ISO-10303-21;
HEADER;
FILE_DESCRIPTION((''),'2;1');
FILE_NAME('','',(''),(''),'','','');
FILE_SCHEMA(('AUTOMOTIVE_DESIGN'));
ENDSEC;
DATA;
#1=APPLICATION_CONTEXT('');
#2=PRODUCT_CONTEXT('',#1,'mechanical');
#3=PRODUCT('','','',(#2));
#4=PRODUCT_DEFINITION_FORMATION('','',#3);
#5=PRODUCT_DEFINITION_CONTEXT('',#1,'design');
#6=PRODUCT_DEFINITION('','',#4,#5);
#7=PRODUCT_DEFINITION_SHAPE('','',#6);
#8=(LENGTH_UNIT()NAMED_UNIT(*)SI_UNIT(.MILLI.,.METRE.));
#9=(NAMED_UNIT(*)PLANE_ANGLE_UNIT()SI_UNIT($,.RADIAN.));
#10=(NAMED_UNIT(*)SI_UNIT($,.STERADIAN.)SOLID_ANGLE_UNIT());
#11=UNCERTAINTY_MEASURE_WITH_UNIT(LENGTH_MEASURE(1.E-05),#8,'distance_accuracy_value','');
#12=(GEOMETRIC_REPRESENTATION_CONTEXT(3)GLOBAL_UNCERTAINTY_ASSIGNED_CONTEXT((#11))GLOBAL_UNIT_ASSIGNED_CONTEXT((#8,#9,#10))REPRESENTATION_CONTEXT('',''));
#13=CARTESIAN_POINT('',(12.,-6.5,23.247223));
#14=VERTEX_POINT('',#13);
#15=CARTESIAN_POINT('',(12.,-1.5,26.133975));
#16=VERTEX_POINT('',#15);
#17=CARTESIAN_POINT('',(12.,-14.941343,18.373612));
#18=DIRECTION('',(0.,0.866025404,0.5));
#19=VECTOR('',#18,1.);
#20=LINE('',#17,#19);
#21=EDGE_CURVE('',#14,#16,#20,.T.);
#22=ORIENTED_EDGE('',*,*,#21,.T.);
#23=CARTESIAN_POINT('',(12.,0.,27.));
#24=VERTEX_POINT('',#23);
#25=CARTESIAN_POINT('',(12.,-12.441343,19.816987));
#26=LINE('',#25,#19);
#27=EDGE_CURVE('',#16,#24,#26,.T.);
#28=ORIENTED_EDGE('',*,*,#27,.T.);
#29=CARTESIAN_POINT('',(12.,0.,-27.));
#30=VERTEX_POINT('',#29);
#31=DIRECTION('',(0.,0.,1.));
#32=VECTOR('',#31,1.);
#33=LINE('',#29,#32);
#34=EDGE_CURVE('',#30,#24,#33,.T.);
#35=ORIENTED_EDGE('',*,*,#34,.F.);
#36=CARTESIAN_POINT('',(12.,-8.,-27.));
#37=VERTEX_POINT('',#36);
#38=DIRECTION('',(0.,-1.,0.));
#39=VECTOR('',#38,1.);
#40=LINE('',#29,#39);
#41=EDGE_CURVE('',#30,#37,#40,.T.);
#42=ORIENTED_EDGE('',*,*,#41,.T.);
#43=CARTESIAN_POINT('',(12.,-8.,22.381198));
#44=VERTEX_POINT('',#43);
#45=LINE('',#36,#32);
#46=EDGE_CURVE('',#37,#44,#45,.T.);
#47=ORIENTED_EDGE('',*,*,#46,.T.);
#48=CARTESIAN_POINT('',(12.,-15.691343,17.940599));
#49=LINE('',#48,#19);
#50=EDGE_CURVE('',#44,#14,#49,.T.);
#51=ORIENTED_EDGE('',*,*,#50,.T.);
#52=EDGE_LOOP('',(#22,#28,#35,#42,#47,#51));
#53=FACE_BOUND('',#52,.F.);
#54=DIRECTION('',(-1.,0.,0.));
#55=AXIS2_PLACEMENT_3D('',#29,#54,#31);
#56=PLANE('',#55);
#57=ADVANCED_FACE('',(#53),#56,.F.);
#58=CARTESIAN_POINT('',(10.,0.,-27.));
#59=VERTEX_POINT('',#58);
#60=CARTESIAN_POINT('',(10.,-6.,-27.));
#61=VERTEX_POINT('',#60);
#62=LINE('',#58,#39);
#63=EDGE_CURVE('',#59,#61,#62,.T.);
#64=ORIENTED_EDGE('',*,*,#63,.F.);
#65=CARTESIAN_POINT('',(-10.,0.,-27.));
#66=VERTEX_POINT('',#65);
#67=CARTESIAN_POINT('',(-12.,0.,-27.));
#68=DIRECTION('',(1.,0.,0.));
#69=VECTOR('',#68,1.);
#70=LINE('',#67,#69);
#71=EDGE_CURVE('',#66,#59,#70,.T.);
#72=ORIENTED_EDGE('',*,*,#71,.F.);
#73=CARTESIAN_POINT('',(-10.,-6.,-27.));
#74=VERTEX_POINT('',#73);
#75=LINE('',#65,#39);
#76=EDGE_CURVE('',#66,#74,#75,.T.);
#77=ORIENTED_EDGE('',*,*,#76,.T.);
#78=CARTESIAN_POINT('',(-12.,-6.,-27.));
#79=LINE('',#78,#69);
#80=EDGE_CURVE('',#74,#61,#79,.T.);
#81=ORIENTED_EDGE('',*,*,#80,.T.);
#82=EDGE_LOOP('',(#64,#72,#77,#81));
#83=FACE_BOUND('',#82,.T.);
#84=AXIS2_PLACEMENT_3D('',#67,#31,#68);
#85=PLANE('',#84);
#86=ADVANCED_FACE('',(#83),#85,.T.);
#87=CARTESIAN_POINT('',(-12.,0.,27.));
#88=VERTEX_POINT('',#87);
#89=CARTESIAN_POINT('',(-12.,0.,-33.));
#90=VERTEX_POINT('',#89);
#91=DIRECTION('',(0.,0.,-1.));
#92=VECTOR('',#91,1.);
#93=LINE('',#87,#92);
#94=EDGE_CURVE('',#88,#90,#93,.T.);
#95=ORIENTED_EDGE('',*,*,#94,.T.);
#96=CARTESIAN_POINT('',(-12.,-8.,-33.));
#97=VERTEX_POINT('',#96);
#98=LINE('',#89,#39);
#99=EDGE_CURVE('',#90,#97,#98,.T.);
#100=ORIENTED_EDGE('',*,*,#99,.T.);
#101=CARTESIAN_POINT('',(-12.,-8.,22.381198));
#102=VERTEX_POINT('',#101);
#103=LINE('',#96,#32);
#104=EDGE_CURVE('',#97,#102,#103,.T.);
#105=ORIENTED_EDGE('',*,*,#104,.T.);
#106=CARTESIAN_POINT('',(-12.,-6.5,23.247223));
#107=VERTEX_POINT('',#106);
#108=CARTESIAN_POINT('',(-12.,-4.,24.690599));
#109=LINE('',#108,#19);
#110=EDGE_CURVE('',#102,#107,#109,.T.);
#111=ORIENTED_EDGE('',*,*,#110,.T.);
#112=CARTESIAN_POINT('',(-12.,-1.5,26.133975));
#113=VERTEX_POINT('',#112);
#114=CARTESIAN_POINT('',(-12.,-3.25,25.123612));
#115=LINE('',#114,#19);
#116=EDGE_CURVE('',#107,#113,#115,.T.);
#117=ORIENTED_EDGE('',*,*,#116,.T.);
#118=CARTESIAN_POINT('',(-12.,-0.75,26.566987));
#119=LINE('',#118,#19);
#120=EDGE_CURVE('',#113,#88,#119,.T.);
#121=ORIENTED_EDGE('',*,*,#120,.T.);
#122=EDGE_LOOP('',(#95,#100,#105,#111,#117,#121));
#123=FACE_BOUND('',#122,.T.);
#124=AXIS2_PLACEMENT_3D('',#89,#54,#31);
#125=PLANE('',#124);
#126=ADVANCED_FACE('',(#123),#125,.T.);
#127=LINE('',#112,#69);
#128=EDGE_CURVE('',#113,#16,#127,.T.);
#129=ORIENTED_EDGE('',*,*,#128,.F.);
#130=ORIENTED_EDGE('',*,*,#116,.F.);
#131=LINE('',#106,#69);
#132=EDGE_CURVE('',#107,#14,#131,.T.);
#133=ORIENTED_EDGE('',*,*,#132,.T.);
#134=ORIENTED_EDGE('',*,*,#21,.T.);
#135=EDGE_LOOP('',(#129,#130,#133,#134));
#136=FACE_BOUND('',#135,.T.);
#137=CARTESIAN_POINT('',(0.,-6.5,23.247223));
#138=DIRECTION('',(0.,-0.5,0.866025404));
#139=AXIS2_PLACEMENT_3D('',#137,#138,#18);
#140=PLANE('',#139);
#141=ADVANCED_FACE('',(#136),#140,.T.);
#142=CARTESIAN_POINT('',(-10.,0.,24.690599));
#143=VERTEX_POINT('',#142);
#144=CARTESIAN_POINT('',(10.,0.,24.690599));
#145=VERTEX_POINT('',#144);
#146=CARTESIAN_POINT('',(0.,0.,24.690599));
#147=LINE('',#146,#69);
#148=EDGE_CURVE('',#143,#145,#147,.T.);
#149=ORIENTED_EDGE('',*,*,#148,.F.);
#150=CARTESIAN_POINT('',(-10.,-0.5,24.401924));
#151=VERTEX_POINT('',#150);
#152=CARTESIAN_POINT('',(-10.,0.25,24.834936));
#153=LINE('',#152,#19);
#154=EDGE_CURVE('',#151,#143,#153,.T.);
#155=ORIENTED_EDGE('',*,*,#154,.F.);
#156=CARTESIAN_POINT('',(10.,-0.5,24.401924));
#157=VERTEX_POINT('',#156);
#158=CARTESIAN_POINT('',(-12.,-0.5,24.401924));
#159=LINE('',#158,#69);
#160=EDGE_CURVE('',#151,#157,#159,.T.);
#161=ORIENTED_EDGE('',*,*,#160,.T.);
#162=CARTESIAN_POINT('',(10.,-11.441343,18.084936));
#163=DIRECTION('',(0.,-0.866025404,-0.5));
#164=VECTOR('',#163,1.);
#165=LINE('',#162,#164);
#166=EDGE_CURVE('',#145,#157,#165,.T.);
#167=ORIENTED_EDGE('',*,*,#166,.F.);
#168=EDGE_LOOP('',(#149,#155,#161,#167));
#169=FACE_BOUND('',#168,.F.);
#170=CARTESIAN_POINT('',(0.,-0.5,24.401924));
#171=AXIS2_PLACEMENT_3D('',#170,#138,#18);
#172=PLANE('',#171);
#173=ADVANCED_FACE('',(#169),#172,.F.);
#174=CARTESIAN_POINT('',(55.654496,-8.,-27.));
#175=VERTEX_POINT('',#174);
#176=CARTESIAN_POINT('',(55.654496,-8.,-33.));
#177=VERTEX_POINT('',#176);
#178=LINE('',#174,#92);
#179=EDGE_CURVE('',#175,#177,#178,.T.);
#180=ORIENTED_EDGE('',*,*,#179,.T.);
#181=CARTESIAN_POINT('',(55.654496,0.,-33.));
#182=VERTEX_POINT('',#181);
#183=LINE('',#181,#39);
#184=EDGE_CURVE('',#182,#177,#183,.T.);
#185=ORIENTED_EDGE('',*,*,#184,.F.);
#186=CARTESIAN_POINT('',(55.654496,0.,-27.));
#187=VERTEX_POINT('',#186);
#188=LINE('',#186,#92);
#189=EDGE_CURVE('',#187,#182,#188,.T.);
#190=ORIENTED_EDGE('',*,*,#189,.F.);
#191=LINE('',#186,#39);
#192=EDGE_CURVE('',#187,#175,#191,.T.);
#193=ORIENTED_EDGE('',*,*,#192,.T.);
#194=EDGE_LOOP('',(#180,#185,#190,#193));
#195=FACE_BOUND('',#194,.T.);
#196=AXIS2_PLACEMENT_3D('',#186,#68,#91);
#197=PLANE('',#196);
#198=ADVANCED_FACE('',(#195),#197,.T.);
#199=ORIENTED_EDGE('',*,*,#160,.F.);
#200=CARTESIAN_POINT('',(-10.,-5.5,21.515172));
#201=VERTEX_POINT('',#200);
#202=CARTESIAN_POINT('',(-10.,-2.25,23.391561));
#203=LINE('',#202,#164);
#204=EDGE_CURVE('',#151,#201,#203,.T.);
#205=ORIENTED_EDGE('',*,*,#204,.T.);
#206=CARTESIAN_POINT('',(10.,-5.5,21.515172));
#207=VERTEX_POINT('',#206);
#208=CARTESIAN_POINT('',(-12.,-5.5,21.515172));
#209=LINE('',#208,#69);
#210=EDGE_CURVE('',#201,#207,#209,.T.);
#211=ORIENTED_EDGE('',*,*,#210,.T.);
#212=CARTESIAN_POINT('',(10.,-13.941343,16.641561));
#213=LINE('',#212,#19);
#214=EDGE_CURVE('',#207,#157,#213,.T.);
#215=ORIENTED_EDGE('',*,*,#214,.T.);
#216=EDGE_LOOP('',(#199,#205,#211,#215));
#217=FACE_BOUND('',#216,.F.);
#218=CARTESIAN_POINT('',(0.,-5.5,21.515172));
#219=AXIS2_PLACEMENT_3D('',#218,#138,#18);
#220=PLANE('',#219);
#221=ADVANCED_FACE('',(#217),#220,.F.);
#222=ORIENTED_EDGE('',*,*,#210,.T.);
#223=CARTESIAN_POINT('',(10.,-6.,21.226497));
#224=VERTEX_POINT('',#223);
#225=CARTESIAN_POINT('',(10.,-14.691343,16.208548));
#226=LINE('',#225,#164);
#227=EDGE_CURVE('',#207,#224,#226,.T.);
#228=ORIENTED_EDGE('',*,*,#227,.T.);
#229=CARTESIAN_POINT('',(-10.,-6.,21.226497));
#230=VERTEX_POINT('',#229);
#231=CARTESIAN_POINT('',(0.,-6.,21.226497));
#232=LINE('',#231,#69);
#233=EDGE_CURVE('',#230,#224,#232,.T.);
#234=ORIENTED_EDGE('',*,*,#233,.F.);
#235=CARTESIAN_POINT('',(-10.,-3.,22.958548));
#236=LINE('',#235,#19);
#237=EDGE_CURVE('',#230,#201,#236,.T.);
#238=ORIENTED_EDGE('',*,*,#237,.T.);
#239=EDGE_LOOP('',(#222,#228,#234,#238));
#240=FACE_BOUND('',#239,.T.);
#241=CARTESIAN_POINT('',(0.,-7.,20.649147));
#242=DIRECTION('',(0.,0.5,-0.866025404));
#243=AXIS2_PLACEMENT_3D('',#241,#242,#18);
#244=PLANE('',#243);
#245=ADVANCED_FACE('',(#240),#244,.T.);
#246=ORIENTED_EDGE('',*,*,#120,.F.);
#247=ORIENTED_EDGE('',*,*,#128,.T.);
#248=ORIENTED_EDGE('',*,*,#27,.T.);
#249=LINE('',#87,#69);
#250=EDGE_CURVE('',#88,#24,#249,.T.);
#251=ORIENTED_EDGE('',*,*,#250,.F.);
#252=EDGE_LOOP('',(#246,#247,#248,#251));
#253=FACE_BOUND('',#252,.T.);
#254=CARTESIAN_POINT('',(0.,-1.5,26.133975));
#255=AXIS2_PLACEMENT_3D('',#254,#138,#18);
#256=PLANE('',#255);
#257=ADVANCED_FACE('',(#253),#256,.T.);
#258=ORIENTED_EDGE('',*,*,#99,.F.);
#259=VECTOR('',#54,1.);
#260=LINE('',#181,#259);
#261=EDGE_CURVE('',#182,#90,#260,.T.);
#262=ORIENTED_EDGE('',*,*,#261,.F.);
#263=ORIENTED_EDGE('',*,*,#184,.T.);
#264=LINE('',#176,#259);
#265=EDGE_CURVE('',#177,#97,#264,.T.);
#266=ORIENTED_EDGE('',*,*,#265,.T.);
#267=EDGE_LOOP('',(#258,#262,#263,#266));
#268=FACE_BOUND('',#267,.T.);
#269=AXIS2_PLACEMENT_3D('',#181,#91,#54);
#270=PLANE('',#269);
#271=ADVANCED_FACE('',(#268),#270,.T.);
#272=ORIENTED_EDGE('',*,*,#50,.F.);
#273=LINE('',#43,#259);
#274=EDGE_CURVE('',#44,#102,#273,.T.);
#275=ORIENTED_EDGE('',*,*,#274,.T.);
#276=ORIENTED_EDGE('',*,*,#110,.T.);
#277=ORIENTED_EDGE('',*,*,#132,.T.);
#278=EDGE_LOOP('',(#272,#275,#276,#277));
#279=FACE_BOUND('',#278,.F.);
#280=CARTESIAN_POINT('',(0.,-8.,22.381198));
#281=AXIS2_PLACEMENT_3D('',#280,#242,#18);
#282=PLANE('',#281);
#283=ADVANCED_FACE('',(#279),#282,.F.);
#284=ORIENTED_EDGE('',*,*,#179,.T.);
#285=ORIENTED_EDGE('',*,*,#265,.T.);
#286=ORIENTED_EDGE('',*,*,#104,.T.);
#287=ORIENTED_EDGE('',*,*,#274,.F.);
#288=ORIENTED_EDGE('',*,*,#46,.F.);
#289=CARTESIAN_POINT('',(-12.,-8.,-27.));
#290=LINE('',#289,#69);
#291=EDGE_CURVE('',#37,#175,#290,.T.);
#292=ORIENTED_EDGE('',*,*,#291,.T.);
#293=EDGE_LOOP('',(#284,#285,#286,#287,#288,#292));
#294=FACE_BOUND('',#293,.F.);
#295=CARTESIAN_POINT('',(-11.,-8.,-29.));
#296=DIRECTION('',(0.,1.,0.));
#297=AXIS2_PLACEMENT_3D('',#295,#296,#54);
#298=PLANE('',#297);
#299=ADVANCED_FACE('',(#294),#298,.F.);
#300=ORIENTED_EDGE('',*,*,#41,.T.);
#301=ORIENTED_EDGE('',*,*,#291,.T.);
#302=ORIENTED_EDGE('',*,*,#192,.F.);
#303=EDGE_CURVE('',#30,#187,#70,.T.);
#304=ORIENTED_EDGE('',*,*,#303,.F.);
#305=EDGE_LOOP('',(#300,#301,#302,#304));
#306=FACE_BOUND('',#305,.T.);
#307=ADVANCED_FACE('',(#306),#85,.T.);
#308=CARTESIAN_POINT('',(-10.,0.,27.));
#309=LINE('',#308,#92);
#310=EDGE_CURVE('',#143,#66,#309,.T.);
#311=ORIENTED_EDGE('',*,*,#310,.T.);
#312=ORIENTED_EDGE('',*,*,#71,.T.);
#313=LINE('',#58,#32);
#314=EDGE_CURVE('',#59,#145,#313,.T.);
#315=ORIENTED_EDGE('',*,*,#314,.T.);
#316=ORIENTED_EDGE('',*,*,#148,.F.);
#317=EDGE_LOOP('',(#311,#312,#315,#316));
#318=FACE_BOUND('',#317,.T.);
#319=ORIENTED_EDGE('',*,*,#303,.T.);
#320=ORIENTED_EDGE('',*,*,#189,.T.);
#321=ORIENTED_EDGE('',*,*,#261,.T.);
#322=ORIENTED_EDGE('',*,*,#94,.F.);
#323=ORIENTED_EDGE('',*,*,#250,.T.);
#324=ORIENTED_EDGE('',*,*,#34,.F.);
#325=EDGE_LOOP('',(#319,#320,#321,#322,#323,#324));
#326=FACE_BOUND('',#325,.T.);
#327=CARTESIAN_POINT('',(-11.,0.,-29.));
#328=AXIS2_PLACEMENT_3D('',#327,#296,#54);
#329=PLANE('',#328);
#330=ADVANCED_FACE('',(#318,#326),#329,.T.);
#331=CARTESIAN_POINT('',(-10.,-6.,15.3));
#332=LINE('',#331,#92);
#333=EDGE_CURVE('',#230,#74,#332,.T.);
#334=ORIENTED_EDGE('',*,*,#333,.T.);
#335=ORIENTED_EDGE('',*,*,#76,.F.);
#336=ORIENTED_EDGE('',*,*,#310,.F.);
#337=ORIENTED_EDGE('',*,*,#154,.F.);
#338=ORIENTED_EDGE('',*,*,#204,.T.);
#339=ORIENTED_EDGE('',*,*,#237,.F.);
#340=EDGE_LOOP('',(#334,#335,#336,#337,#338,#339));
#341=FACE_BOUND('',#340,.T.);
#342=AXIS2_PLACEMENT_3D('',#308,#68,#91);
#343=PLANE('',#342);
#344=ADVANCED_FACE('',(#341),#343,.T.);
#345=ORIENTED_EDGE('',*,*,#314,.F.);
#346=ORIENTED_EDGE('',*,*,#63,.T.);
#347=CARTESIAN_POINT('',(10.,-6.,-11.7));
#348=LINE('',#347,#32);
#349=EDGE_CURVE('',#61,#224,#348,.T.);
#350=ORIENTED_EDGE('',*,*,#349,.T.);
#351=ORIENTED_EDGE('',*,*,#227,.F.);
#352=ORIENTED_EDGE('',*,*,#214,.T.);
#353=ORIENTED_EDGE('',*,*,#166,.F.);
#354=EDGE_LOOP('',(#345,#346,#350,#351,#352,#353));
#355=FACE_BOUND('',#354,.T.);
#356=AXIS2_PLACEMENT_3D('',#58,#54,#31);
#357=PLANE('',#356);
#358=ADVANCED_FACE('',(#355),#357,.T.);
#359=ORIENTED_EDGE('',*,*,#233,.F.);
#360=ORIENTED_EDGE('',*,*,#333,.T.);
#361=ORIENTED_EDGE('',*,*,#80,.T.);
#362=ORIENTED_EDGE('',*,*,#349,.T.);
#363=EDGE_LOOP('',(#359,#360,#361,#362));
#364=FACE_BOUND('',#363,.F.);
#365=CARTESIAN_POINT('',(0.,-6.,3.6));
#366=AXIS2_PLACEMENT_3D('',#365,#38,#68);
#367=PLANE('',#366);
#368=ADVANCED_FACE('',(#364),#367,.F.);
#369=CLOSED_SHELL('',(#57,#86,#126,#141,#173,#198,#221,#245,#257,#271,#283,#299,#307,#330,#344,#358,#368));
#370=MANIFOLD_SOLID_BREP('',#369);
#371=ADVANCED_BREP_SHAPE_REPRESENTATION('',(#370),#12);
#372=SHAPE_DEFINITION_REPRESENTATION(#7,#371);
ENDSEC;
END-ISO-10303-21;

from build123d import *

# Parameters (mm, degrees)
F0_W     = 20
F0_H     = 50
F0_H_2   = 2
F1_DEPTH = 8
F3_DEPTH = 50
F4_DEPTH = 25.4
F5_T     = -2
F6_W     = 2
F6_H     = 4
F6_H_2   = 2
F6_W_2   = 20
F6_W_3   = 43.6544959545
F7_DEPTH = 8


with BuildPart() as f1:
    # F0 (on Front) → F1 (new body)
    with BuildSketch(Plane.XZ):
        Polygon((12, 27), (-12, 27), (-12, -27), (-10, -27), (-10, -25), (-10, 25), (10, 25), (10, -25), (10, -27), (12, -27), align=None)
        Rectangle(F0_W, F0_H)
        with Locations((0, -26)):
            Rectangle(F0_W, F0_H_2)
    extrude(amount=F1_DEPTH)

    # F2 (on Right) → F3 (cut)
    with BuildSketch(Plane.YZ):
        Polygon((-6.5, 23.2472232503), (-1.5, 26.1339745962), (0, 27), (-8, 27), (-8, 22.3811978465), align=None)
    extrude(amount=-F3_DEPTH, mode=Mode.SUBTRACT)

    # F2 (on Right) → F4 (cut)
    with BuildSketch(Plane.YZ):
        Polygon((-6.5, 23.2472232503), (-1.5, 26.1339745962), (0, 27), (-8, 27), (-8, 22.3811978465), align=None)
    extrude(amount=F4_DEPTH, mode=Mode.SUBTRACT)

    # F5
    f5_openings = [f1.faces().sort_by_distance(p)[0] for p in [
        (0, 0, 0),
        (0, -4, -27),
    ]]
    offset(amount=F5_T, openings=f5_openings)

    # F6 (on face) → F7 (join)
    with BuildSketch(Plane(origin=(0, 0, 0), x_dir=(-1, 0, 0), z_dir=(0, 1, 0))):
        with Locations((11, -29)):
            Rectangle(F6_W, F6_H)
        with Locations((11, -32)):
            Rectangle(F6_W, F6_H_2)
        Polygon((10, -31), (10, -27), (-10, -27), (-10, -29), (-53.6544959545, -29), (-53.6544959545, -31), (-10, -31), align=None)
        with Locations((0, -32)):
            Rectangle(F6_W_2, F6_H_2)
        Polygon((-10, -29), (-10, -27), (-12, -27), (-53.6544959545, -27), (-53.6544959545, -29), align=None)
        with Locations((-31.8272479773, -32)):
            Rectangle(F6_W_3, F6_H_2)
        with Locations((-54.6544959545, -32)):
            Rectangle(F6_W, F6_H_2)
        with Locations((-54.6544959545, -30)):
            Rectangle(F6_W, F6_H_2)
        with Locations((-54.6544959545, -28)):
            Rectangle(F6_W, F6_H_2)
    extrude(amount=-F7_DEPTH)


solid = f1.part
